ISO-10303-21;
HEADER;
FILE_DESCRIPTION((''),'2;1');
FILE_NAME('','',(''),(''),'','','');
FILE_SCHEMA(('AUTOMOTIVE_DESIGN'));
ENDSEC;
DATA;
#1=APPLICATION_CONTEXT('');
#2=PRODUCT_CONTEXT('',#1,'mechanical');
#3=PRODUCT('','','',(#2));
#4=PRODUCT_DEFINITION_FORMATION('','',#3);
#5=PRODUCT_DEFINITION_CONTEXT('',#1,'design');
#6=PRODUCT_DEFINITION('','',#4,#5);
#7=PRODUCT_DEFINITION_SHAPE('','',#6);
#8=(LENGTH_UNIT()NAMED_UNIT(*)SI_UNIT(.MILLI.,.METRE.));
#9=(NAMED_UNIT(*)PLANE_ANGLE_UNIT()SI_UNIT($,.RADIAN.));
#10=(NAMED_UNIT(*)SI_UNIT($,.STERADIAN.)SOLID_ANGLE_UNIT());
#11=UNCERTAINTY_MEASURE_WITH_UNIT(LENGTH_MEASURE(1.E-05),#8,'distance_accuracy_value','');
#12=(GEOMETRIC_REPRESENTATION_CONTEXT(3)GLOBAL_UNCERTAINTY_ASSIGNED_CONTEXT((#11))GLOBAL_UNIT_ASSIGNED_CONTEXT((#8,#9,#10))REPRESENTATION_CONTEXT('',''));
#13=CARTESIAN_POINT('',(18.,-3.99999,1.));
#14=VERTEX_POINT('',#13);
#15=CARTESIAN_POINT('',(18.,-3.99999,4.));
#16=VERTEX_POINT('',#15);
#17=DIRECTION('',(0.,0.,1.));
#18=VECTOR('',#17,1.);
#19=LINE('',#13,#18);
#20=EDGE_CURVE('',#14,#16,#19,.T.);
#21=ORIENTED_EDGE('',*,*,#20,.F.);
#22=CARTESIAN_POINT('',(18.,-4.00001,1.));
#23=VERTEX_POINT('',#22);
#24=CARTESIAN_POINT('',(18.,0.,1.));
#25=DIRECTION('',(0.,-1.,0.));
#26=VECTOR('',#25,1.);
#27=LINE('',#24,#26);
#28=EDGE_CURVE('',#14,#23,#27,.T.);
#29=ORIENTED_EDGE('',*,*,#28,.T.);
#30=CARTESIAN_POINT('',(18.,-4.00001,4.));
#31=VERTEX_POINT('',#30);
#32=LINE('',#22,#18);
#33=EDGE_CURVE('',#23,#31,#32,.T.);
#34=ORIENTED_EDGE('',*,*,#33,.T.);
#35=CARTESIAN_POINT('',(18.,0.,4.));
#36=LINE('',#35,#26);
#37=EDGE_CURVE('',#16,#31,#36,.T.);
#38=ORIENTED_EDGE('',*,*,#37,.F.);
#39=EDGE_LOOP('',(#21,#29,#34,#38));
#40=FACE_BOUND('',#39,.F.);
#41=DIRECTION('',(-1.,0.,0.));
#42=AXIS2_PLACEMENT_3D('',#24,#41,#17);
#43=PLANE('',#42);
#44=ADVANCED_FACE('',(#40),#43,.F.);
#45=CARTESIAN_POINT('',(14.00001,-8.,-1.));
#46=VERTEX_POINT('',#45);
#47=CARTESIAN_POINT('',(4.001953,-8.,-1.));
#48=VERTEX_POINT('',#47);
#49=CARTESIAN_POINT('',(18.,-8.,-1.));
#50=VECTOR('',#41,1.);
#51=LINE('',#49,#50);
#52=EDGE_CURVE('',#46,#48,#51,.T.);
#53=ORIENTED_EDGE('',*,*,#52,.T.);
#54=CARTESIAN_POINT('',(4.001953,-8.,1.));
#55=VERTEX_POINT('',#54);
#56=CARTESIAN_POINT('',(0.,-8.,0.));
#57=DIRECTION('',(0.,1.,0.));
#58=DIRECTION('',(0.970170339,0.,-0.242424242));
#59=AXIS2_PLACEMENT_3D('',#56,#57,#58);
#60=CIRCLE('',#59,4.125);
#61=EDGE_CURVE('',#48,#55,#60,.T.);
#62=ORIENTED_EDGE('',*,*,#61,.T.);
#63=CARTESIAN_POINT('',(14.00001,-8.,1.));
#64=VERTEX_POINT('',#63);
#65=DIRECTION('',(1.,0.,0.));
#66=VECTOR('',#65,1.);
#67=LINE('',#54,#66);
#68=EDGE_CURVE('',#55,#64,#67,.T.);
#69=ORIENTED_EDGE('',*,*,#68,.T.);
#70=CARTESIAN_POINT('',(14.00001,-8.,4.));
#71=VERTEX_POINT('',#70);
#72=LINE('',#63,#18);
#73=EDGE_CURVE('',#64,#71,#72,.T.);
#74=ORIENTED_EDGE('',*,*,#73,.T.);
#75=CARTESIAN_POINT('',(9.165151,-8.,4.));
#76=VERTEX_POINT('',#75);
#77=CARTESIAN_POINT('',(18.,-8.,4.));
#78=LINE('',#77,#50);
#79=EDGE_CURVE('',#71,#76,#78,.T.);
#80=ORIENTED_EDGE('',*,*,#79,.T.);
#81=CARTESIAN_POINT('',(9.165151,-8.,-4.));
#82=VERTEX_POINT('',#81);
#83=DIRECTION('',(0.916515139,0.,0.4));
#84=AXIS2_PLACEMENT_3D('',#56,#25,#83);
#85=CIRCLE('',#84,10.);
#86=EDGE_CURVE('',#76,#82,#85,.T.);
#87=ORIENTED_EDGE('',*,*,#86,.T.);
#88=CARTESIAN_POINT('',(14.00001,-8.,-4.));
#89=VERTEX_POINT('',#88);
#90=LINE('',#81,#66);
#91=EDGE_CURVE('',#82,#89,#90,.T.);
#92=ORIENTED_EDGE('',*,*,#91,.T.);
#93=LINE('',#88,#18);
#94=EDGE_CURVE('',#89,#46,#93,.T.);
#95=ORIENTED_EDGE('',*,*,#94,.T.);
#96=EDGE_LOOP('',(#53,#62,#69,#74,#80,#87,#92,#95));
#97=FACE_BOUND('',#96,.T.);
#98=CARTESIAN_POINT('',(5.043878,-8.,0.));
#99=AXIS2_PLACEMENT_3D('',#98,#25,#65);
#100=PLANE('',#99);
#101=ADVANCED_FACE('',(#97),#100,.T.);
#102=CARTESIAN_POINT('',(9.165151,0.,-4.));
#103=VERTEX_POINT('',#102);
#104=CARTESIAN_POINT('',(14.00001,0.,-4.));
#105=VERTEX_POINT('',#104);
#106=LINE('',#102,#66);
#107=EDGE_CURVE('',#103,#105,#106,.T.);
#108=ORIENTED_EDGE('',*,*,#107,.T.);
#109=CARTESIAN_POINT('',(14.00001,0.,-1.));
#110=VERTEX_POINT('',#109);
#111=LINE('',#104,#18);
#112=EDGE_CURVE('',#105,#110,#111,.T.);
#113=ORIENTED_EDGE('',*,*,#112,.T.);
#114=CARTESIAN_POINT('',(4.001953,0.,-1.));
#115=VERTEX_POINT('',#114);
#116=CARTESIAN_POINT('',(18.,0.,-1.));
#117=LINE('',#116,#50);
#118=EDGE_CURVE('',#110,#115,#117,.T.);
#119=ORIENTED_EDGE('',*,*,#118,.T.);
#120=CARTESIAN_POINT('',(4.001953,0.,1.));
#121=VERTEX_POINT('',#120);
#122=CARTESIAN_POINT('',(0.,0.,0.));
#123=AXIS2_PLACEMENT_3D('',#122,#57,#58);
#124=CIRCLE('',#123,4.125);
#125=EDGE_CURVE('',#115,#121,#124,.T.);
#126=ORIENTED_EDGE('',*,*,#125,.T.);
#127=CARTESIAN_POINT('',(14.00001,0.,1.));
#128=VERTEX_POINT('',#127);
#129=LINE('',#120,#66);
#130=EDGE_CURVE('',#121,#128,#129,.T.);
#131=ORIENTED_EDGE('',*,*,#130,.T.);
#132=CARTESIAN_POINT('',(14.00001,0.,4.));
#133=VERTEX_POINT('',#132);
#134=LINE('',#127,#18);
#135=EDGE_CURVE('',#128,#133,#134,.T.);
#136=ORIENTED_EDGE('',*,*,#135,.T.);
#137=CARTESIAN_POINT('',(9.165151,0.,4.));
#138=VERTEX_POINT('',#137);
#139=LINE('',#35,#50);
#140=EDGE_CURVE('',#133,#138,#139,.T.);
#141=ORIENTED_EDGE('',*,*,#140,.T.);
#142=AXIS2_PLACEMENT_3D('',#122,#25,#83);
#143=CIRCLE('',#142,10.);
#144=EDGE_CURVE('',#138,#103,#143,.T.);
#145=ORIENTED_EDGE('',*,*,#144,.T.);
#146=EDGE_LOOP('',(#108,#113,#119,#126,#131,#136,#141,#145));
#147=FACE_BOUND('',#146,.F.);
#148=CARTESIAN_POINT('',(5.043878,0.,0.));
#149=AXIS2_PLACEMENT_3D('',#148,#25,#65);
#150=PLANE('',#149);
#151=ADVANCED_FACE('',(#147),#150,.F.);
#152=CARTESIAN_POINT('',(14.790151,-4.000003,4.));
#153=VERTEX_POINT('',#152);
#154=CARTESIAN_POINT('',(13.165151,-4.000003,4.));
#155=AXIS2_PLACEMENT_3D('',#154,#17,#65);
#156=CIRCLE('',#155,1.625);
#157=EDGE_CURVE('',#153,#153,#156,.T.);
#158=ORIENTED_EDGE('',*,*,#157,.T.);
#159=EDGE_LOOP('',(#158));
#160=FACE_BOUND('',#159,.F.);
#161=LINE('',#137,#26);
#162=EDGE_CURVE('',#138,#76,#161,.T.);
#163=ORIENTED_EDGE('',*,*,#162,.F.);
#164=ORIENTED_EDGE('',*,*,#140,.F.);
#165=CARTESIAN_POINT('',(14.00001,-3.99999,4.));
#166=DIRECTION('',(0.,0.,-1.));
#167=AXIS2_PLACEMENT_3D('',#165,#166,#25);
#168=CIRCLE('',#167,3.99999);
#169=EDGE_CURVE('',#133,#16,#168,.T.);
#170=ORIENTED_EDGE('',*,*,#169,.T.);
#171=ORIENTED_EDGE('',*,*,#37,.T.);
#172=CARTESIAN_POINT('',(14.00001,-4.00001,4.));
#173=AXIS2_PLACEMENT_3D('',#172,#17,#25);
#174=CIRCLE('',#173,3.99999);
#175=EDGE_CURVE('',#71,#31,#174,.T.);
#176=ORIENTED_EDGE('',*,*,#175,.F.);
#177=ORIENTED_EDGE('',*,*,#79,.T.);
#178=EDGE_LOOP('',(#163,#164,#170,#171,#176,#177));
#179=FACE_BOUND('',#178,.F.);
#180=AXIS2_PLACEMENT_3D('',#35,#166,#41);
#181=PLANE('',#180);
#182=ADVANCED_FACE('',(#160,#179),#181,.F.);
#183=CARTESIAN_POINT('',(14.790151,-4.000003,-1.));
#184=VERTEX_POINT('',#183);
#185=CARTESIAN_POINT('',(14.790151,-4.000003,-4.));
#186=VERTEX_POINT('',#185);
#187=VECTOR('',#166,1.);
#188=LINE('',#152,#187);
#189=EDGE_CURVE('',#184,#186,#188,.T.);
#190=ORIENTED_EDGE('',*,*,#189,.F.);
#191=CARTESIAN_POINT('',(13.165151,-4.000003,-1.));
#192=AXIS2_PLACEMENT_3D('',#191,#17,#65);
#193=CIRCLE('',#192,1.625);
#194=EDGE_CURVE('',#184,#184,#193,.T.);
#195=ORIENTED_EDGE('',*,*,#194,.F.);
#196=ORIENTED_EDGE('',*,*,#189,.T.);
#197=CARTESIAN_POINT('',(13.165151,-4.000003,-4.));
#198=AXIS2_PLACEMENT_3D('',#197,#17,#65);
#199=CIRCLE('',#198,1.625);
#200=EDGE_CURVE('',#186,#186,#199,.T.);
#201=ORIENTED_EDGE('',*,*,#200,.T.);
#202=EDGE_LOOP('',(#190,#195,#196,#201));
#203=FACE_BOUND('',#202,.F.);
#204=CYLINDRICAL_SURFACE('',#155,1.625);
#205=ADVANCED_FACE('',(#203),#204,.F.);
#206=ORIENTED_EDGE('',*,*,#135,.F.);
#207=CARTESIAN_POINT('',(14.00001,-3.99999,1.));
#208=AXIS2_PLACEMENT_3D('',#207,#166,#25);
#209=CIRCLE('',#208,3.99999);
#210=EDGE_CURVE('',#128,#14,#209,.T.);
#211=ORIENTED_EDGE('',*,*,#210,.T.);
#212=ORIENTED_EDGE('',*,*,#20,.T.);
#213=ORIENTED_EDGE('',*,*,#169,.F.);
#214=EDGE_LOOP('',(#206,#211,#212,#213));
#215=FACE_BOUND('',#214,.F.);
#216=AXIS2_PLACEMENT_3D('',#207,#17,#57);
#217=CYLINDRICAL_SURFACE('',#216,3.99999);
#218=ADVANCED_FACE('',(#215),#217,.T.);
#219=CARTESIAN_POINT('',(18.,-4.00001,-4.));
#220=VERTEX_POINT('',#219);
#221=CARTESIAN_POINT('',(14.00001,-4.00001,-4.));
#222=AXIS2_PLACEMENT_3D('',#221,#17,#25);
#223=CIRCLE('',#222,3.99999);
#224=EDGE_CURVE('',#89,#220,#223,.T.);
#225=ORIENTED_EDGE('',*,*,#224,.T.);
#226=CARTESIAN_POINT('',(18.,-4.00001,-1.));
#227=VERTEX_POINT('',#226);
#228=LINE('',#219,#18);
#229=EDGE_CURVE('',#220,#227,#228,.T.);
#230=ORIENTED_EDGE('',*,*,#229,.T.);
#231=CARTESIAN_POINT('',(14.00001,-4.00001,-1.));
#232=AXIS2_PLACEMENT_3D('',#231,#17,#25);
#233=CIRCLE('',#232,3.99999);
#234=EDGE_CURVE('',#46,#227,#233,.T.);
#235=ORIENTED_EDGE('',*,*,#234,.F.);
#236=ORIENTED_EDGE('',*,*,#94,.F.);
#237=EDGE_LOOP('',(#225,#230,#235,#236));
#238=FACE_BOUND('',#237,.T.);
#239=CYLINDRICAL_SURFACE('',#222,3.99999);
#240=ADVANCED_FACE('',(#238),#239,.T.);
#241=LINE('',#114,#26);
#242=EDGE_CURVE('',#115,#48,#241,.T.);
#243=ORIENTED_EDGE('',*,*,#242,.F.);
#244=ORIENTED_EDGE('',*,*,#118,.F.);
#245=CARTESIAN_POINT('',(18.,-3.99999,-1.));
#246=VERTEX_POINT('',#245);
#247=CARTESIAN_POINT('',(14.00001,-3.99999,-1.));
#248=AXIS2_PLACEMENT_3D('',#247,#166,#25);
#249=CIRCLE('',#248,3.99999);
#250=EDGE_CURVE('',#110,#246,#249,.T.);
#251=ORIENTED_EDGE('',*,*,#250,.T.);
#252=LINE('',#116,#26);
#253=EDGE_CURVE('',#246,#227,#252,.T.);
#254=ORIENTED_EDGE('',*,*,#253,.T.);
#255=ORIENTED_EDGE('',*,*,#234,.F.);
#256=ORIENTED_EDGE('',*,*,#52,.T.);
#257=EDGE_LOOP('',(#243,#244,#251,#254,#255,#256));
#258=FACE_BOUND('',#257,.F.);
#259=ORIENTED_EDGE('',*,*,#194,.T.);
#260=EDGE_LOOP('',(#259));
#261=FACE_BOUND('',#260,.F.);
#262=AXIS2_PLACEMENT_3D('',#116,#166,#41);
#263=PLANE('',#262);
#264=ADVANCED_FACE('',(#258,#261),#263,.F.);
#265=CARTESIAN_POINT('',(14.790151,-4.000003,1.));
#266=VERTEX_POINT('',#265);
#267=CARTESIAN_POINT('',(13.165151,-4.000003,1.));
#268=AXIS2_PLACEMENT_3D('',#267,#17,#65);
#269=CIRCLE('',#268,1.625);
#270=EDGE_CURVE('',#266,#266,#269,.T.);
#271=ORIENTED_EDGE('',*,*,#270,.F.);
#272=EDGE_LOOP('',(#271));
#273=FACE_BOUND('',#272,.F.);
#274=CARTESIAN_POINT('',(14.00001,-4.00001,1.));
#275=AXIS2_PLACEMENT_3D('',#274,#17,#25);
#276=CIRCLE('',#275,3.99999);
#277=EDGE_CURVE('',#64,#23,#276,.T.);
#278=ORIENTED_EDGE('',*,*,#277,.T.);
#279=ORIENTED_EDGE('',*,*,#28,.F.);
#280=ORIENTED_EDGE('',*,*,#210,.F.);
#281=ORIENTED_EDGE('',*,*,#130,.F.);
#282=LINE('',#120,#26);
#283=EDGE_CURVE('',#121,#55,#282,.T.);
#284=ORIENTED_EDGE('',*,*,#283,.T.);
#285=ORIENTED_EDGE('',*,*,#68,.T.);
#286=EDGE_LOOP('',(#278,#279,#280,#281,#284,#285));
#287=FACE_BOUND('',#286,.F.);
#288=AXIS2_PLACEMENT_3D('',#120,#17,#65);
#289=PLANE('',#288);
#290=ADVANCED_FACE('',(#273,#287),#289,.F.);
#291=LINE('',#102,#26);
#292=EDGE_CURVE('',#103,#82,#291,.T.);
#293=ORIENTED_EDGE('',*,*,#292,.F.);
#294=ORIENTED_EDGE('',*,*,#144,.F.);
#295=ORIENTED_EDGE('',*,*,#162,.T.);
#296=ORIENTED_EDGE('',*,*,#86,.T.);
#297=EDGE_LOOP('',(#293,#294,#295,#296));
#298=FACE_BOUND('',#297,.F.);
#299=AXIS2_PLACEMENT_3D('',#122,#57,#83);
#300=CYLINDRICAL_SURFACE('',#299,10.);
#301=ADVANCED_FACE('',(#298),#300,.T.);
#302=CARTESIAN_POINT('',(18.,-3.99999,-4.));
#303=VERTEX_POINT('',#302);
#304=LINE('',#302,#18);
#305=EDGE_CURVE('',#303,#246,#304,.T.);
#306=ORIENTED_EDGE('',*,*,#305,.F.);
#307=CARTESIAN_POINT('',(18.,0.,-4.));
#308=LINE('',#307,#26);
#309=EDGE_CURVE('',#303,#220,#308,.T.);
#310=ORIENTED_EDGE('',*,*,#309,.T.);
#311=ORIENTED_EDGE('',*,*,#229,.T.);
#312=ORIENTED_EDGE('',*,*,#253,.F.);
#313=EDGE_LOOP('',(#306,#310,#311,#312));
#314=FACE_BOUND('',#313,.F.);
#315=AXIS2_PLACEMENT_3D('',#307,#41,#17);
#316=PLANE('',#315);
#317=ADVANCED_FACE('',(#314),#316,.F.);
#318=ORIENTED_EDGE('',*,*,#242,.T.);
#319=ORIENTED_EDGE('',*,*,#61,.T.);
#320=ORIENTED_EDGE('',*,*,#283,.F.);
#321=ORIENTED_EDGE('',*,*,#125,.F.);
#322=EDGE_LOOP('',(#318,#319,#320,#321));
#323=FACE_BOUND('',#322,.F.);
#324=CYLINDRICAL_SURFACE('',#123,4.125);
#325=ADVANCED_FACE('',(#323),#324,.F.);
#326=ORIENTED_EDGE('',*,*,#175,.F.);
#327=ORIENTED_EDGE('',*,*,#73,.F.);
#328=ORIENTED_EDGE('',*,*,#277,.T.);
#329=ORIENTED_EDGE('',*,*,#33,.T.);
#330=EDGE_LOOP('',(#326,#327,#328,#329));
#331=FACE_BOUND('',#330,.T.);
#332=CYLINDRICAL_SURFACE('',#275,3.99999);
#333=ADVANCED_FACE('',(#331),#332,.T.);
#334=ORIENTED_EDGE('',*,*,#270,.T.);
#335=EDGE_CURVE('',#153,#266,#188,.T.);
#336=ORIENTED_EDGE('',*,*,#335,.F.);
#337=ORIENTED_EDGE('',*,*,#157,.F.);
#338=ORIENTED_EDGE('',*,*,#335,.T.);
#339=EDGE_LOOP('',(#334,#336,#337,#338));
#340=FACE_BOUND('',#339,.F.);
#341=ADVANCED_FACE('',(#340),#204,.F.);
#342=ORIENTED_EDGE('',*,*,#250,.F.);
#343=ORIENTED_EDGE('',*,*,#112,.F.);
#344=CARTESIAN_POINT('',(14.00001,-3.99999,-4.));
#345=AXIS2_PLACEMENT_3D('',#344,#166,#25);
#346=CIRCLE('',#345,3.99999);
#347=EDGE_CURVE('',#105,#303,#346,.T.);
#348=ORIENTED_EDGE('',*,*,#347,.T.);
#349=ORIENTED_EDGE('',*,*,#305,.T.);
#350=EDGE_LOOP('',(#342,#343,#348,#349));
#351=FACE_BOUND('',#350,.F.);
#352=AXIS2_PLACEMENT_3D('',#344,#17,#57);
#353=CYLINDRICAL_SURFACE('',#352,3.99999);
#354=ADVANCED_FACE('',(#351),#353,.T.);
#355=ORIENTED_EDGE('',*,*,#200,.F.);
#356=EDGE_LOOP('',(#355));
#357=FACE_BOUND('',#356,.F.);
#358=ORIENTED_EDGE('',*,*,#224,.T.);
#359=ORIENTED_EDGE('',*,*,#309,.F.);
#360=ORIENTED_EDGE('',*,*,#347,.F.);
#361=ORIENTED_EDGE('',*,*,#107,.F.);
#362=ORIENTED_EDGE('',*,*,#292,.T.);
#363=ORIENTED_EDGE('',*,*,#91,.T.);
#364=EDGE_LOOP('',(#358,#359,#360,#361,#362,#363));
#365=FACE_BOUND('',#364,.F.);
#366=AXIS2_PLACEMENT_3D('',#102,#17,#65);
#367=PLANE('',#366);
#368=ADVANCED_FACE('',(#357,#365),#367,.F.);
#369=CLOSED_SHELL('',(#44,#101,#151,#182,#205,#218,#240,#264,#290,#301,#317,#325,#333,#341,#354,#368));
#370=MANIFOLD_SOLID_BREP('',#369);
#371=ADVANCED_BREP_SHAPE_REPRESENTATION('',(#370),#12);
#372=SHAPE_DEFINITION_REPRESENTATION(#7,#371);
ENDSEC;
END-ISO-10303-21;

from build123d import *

# Parameters (mm, degrees)
F1_DEPTH = 8
F2_R     = 1.625
F3_DEPTH = 14.001
F4_R     = 3.99999


# Not quite as in the source:
# - a fillet or chamfer is up to 0.001 mm smaller than in the source, because OpenCascade refuses the exact size


with BuildPart() as f1:
    # F0 (on Front) → F1 (new body)
    with BuildSketch(Plane.XZ):
        with BuildLine():
            ThreePointArc((4.0019526484, -1), (-4.125, 0), (4.0019526484, 1))
            Line((4.0019526484, 1), (18, 1))
            Line((18, 1), (18, 4))
            Line((18, 4), (9.1651513899, 4))
            ThreePointArc((9.1651513899, 4), (-10, 0), (9.1651513899, -4))
            Line((9.1651513899, -4), (18, -4))
            Line((18, -4), (18, -1))
            Line((18, -1), (4.0019526484, -1))
        make_face()
    extrude(amount=F1_DEPTH)

    # F2 (on face) → F3 (cut, through all)
    with BuildSketch(Plane.XY.offset(4)):
        with Locations((13.1651513899, -4.0000034496)):
            Circle(F2_R)
    extrude(amount=-F3_DEPTH, mode=Mode.SUBTRACT)

    # F4 (radius 4 in the source; OpenCascade refuses exactly that, so slightly less here)
    f4_edges = [f1.edges().sort_by_distance(p)[0] for p in [
        (18, -8, 2.5),
        (18, -8, -2.5),
        (18, 0, -2.5),
        (18, 0, 2.5),
    ]]
    fillet(f4_edges, radius=F4_R)


solid = f1.part
